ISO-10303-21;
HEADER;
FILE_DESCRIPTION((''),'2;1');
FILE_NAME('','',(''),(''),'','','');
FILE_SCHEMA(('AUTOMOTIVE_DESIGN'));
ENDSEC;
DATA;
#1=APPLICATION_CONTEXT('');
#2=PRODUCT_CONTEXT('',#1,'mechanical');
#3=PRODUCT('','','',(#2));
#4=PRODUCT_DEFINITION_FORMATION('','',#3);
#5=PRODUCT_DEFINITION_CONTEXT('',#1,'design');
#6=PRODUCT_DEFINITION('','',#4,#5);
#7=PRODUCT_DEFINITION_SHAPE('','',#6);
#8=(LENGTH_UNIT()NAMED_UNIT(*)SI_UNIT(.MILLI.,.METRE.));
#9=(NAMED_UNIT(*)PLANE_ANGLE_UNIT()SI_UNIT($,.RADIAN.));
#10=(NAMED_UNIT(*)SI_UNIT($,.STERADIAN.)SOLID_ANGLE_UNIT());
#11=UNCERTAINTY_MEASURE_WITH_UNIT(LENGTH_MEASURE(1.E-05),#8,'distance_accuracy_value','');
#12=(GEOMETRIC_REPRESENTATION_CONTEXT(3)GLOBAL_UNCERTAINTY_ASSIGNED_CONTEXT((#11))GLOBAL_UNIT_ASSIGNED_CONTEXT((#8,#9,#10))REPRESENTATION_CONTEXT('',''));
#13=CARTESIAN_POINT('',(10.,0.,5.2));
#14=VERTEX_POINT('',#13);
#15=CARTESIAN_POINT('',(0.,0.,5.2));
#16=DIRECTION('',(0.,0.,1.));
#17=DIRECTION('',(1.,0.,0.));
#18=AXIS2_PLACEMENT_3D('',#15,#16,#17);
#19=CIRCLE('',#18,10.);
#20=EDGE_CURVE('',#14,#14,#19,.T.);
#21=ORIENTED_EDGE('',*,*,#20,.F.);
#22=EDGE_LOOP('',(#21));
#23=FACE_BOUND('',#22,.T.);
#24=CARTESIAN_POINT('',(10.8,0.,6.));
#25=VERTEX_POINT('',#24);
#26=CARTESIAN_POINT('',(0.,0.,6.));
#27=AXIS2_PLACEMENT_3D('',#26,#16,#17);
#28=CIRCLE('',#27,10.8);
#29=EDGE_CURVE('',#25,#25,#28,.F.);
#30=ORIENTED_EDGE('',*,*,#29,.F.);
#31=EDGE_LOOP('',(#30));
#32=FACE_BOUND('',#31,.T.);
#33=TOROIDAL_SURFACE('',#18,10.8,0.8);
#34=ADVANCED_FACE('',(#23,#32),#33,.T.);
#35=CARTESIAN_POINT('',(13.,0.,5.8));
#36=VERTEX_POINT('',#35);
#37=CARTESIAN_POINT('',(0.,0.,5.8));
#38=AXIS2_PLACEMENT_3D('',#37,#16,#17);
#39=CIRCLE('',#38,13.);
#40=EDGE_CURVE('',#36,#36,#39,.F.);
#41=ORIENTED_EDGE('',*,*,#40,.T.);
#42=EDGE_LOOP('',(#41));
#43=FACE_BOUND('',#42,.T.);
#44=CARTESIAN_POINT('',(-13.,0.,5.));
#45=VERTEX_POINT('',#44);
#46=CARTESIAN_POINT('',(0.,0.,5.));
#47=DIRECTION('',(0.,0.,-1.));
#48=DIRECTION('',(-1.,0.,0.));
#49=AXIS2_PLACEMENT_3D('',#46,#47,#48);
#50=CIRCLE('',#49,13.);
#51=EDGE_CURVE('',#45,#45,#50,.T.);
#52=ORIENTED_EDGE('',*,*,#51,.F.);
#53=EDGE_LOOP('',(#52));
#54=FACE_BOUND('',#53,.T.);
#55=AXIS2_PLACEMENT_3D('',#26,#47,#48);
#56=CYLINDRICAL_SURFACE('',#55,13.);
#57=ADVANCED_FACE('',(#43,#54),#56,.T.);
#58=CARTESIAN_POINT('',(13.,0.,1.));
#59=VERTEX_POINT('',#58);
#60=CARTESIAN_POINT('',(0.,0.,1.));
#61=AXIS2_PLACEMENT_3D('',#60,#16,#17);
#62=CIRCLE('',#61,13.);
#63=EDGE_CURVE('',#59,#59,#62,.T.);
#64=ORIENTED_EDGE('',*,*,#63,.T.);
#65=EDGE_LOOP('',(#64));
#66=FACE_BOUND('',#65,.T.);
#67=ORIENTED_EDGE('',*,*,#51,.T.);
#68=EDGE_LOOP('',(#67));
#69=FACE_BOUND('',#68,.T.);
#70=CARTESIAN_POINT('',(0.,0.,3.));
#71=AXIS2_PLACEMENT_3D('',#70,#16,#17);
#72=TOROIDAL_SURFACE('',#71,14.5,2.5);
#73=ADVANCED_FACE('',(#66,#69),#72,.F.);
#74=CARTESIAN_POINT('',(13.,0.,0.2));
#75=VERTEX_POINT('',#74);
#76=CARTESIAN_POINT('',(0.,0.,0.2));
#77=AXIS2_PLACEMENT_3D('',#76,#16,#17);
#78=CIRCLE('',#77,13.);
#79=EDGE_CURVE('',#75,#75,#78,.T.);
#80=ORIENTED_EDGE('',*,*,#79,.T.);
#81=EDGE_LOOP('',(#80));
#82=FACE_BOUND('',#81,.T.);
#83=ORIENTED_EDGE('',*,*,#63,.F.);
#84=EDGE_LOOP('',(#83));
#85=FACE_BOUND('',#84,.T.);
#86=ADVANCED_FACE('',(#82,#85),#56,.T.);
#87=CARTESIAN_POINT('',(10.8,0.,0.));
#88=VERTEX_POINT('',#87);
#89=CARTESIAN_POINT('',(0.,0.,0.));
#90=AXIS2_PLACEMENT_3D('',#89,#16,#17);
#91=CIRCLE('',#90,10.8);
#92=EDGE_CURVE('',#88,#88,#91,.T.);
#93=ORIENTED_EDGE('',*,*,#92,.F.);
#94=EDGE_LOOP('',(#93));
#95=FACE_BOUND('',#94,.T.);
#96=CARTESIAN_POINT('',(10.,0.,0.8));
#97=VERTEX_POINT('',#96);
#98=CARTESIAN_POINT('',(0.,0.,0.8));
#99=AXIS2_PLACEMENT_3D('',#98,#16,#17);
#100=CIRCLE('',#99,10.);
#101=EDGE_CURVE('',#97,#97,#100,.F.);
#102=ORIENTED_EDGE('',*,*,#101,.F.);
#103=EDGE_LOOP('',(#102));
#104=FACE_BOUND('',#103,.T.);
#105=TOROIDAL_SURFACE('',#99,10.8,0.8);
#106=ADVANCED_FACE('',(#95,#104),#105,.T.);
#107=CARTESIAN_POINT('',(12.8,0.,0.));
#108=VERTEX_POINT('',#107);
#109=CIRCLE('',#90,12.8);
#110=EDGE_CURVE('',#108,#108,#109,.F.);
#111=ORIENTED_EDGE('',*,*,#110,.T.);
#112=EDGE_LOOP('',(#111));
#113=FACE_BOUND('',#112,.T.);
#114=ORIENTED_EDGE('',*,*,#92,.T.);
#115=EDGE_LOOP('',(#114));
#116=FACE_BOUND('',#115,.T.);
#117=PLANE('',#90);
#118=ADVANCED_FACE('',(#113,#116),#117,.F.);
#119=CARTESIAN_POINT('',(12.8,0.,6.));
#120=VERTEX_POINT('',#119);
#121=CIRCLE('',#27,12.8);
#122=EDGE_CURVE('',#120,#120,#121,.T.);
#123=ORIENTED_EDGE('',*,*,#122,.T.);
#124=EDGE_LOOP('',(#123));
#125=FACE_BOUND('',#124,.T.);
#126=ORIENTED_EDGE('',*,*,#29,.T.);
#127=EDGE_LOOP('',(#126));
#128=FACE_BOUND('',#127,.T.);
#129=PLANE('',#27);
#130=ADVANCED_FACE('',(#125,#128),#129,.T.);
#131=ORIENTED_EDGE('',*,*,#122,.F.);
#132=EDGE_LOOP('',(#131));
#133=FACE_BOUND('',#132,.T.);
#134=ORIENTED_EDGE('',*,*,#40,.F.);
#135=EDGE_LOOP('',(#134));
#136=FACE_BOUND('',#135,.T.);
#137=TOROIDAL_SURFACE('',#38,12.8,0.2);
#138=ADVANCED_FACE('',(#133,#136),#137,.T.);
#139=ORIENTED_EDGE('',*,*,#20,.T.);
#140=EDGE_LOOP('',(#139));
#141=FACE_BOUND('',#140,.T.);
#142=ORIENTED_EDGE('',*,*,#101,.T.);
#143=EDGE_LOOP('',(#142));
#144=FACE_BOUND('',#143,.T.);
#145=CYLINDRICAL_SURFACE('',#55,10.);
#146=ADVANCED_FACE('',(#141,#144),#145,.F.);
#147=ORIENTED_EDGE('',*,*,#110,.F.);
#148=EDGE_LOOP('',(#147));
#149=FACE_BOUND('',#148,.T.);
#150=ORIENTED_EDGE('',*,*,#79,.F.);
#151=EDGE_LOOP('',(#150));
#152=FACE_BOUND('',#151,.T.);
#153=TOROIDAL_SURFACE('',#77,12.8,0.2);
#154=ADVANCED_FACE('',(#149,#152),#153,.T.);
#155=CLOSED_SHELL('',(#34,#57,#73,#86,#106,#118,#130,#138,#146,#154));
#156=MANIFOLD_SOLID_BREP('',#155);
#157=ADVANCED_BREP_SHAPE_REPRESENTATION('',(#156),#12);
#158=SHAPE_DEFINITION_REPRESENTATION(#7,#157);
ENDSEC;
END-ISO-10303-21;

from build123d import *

# Parameters (mm, degrees)
SKETCH_1_R      = 13
SKETCH_1_R_2    = 10
EXTRUDE_1_DEPTH = 6
FILLET_1_R      = 0.8
FILLET_2_R      = 0.2


# Read off the part's stored shape, not the designer's step: 压凹5
with BuildPart() as part:
    # 草图1 → 凸台-拉伸1 (new body)
    with BuildSketch(Plane.XY):
        Circle(SKETCH_1_R)
        Circle(SKETCH_1_R_2, mode=Mode.SUBTRACT)
    extrude(amount=EXTRUDE_1_DEPTH)

    # 压凹5 outline → 压凹5 (revolve, cut)
    with BuildSketch(Plane.XZ):
        with BuildLine():
            Line((13, 1), (13, 5))
            ThreePointArc((13, 5), (12, 3), (13, 1))
        make_face()
    revolve(axis=Axis((0, 0, 0), (0, 0, 1)), mode=Mode.SUBTRACT)

    # 圆角1
    fillet_1_edges = [part.edges().sort_by_distance(p)[0] for p in [
        (-10, 0, 0),
        (-10, 0, 6),
    ]]
    fillet(fillet_1_edges, radius=FILLET_1_R)

    # 圆角2
    fillet_2_edges = [part.edges().sort_by_distance(p)[0] for p in [
        (-13, 0, 0),
        (-13, 0, 6),
    ]]
    fillet(fillet_2_edges, radius=FILLET_2_R)


solid = part.part
